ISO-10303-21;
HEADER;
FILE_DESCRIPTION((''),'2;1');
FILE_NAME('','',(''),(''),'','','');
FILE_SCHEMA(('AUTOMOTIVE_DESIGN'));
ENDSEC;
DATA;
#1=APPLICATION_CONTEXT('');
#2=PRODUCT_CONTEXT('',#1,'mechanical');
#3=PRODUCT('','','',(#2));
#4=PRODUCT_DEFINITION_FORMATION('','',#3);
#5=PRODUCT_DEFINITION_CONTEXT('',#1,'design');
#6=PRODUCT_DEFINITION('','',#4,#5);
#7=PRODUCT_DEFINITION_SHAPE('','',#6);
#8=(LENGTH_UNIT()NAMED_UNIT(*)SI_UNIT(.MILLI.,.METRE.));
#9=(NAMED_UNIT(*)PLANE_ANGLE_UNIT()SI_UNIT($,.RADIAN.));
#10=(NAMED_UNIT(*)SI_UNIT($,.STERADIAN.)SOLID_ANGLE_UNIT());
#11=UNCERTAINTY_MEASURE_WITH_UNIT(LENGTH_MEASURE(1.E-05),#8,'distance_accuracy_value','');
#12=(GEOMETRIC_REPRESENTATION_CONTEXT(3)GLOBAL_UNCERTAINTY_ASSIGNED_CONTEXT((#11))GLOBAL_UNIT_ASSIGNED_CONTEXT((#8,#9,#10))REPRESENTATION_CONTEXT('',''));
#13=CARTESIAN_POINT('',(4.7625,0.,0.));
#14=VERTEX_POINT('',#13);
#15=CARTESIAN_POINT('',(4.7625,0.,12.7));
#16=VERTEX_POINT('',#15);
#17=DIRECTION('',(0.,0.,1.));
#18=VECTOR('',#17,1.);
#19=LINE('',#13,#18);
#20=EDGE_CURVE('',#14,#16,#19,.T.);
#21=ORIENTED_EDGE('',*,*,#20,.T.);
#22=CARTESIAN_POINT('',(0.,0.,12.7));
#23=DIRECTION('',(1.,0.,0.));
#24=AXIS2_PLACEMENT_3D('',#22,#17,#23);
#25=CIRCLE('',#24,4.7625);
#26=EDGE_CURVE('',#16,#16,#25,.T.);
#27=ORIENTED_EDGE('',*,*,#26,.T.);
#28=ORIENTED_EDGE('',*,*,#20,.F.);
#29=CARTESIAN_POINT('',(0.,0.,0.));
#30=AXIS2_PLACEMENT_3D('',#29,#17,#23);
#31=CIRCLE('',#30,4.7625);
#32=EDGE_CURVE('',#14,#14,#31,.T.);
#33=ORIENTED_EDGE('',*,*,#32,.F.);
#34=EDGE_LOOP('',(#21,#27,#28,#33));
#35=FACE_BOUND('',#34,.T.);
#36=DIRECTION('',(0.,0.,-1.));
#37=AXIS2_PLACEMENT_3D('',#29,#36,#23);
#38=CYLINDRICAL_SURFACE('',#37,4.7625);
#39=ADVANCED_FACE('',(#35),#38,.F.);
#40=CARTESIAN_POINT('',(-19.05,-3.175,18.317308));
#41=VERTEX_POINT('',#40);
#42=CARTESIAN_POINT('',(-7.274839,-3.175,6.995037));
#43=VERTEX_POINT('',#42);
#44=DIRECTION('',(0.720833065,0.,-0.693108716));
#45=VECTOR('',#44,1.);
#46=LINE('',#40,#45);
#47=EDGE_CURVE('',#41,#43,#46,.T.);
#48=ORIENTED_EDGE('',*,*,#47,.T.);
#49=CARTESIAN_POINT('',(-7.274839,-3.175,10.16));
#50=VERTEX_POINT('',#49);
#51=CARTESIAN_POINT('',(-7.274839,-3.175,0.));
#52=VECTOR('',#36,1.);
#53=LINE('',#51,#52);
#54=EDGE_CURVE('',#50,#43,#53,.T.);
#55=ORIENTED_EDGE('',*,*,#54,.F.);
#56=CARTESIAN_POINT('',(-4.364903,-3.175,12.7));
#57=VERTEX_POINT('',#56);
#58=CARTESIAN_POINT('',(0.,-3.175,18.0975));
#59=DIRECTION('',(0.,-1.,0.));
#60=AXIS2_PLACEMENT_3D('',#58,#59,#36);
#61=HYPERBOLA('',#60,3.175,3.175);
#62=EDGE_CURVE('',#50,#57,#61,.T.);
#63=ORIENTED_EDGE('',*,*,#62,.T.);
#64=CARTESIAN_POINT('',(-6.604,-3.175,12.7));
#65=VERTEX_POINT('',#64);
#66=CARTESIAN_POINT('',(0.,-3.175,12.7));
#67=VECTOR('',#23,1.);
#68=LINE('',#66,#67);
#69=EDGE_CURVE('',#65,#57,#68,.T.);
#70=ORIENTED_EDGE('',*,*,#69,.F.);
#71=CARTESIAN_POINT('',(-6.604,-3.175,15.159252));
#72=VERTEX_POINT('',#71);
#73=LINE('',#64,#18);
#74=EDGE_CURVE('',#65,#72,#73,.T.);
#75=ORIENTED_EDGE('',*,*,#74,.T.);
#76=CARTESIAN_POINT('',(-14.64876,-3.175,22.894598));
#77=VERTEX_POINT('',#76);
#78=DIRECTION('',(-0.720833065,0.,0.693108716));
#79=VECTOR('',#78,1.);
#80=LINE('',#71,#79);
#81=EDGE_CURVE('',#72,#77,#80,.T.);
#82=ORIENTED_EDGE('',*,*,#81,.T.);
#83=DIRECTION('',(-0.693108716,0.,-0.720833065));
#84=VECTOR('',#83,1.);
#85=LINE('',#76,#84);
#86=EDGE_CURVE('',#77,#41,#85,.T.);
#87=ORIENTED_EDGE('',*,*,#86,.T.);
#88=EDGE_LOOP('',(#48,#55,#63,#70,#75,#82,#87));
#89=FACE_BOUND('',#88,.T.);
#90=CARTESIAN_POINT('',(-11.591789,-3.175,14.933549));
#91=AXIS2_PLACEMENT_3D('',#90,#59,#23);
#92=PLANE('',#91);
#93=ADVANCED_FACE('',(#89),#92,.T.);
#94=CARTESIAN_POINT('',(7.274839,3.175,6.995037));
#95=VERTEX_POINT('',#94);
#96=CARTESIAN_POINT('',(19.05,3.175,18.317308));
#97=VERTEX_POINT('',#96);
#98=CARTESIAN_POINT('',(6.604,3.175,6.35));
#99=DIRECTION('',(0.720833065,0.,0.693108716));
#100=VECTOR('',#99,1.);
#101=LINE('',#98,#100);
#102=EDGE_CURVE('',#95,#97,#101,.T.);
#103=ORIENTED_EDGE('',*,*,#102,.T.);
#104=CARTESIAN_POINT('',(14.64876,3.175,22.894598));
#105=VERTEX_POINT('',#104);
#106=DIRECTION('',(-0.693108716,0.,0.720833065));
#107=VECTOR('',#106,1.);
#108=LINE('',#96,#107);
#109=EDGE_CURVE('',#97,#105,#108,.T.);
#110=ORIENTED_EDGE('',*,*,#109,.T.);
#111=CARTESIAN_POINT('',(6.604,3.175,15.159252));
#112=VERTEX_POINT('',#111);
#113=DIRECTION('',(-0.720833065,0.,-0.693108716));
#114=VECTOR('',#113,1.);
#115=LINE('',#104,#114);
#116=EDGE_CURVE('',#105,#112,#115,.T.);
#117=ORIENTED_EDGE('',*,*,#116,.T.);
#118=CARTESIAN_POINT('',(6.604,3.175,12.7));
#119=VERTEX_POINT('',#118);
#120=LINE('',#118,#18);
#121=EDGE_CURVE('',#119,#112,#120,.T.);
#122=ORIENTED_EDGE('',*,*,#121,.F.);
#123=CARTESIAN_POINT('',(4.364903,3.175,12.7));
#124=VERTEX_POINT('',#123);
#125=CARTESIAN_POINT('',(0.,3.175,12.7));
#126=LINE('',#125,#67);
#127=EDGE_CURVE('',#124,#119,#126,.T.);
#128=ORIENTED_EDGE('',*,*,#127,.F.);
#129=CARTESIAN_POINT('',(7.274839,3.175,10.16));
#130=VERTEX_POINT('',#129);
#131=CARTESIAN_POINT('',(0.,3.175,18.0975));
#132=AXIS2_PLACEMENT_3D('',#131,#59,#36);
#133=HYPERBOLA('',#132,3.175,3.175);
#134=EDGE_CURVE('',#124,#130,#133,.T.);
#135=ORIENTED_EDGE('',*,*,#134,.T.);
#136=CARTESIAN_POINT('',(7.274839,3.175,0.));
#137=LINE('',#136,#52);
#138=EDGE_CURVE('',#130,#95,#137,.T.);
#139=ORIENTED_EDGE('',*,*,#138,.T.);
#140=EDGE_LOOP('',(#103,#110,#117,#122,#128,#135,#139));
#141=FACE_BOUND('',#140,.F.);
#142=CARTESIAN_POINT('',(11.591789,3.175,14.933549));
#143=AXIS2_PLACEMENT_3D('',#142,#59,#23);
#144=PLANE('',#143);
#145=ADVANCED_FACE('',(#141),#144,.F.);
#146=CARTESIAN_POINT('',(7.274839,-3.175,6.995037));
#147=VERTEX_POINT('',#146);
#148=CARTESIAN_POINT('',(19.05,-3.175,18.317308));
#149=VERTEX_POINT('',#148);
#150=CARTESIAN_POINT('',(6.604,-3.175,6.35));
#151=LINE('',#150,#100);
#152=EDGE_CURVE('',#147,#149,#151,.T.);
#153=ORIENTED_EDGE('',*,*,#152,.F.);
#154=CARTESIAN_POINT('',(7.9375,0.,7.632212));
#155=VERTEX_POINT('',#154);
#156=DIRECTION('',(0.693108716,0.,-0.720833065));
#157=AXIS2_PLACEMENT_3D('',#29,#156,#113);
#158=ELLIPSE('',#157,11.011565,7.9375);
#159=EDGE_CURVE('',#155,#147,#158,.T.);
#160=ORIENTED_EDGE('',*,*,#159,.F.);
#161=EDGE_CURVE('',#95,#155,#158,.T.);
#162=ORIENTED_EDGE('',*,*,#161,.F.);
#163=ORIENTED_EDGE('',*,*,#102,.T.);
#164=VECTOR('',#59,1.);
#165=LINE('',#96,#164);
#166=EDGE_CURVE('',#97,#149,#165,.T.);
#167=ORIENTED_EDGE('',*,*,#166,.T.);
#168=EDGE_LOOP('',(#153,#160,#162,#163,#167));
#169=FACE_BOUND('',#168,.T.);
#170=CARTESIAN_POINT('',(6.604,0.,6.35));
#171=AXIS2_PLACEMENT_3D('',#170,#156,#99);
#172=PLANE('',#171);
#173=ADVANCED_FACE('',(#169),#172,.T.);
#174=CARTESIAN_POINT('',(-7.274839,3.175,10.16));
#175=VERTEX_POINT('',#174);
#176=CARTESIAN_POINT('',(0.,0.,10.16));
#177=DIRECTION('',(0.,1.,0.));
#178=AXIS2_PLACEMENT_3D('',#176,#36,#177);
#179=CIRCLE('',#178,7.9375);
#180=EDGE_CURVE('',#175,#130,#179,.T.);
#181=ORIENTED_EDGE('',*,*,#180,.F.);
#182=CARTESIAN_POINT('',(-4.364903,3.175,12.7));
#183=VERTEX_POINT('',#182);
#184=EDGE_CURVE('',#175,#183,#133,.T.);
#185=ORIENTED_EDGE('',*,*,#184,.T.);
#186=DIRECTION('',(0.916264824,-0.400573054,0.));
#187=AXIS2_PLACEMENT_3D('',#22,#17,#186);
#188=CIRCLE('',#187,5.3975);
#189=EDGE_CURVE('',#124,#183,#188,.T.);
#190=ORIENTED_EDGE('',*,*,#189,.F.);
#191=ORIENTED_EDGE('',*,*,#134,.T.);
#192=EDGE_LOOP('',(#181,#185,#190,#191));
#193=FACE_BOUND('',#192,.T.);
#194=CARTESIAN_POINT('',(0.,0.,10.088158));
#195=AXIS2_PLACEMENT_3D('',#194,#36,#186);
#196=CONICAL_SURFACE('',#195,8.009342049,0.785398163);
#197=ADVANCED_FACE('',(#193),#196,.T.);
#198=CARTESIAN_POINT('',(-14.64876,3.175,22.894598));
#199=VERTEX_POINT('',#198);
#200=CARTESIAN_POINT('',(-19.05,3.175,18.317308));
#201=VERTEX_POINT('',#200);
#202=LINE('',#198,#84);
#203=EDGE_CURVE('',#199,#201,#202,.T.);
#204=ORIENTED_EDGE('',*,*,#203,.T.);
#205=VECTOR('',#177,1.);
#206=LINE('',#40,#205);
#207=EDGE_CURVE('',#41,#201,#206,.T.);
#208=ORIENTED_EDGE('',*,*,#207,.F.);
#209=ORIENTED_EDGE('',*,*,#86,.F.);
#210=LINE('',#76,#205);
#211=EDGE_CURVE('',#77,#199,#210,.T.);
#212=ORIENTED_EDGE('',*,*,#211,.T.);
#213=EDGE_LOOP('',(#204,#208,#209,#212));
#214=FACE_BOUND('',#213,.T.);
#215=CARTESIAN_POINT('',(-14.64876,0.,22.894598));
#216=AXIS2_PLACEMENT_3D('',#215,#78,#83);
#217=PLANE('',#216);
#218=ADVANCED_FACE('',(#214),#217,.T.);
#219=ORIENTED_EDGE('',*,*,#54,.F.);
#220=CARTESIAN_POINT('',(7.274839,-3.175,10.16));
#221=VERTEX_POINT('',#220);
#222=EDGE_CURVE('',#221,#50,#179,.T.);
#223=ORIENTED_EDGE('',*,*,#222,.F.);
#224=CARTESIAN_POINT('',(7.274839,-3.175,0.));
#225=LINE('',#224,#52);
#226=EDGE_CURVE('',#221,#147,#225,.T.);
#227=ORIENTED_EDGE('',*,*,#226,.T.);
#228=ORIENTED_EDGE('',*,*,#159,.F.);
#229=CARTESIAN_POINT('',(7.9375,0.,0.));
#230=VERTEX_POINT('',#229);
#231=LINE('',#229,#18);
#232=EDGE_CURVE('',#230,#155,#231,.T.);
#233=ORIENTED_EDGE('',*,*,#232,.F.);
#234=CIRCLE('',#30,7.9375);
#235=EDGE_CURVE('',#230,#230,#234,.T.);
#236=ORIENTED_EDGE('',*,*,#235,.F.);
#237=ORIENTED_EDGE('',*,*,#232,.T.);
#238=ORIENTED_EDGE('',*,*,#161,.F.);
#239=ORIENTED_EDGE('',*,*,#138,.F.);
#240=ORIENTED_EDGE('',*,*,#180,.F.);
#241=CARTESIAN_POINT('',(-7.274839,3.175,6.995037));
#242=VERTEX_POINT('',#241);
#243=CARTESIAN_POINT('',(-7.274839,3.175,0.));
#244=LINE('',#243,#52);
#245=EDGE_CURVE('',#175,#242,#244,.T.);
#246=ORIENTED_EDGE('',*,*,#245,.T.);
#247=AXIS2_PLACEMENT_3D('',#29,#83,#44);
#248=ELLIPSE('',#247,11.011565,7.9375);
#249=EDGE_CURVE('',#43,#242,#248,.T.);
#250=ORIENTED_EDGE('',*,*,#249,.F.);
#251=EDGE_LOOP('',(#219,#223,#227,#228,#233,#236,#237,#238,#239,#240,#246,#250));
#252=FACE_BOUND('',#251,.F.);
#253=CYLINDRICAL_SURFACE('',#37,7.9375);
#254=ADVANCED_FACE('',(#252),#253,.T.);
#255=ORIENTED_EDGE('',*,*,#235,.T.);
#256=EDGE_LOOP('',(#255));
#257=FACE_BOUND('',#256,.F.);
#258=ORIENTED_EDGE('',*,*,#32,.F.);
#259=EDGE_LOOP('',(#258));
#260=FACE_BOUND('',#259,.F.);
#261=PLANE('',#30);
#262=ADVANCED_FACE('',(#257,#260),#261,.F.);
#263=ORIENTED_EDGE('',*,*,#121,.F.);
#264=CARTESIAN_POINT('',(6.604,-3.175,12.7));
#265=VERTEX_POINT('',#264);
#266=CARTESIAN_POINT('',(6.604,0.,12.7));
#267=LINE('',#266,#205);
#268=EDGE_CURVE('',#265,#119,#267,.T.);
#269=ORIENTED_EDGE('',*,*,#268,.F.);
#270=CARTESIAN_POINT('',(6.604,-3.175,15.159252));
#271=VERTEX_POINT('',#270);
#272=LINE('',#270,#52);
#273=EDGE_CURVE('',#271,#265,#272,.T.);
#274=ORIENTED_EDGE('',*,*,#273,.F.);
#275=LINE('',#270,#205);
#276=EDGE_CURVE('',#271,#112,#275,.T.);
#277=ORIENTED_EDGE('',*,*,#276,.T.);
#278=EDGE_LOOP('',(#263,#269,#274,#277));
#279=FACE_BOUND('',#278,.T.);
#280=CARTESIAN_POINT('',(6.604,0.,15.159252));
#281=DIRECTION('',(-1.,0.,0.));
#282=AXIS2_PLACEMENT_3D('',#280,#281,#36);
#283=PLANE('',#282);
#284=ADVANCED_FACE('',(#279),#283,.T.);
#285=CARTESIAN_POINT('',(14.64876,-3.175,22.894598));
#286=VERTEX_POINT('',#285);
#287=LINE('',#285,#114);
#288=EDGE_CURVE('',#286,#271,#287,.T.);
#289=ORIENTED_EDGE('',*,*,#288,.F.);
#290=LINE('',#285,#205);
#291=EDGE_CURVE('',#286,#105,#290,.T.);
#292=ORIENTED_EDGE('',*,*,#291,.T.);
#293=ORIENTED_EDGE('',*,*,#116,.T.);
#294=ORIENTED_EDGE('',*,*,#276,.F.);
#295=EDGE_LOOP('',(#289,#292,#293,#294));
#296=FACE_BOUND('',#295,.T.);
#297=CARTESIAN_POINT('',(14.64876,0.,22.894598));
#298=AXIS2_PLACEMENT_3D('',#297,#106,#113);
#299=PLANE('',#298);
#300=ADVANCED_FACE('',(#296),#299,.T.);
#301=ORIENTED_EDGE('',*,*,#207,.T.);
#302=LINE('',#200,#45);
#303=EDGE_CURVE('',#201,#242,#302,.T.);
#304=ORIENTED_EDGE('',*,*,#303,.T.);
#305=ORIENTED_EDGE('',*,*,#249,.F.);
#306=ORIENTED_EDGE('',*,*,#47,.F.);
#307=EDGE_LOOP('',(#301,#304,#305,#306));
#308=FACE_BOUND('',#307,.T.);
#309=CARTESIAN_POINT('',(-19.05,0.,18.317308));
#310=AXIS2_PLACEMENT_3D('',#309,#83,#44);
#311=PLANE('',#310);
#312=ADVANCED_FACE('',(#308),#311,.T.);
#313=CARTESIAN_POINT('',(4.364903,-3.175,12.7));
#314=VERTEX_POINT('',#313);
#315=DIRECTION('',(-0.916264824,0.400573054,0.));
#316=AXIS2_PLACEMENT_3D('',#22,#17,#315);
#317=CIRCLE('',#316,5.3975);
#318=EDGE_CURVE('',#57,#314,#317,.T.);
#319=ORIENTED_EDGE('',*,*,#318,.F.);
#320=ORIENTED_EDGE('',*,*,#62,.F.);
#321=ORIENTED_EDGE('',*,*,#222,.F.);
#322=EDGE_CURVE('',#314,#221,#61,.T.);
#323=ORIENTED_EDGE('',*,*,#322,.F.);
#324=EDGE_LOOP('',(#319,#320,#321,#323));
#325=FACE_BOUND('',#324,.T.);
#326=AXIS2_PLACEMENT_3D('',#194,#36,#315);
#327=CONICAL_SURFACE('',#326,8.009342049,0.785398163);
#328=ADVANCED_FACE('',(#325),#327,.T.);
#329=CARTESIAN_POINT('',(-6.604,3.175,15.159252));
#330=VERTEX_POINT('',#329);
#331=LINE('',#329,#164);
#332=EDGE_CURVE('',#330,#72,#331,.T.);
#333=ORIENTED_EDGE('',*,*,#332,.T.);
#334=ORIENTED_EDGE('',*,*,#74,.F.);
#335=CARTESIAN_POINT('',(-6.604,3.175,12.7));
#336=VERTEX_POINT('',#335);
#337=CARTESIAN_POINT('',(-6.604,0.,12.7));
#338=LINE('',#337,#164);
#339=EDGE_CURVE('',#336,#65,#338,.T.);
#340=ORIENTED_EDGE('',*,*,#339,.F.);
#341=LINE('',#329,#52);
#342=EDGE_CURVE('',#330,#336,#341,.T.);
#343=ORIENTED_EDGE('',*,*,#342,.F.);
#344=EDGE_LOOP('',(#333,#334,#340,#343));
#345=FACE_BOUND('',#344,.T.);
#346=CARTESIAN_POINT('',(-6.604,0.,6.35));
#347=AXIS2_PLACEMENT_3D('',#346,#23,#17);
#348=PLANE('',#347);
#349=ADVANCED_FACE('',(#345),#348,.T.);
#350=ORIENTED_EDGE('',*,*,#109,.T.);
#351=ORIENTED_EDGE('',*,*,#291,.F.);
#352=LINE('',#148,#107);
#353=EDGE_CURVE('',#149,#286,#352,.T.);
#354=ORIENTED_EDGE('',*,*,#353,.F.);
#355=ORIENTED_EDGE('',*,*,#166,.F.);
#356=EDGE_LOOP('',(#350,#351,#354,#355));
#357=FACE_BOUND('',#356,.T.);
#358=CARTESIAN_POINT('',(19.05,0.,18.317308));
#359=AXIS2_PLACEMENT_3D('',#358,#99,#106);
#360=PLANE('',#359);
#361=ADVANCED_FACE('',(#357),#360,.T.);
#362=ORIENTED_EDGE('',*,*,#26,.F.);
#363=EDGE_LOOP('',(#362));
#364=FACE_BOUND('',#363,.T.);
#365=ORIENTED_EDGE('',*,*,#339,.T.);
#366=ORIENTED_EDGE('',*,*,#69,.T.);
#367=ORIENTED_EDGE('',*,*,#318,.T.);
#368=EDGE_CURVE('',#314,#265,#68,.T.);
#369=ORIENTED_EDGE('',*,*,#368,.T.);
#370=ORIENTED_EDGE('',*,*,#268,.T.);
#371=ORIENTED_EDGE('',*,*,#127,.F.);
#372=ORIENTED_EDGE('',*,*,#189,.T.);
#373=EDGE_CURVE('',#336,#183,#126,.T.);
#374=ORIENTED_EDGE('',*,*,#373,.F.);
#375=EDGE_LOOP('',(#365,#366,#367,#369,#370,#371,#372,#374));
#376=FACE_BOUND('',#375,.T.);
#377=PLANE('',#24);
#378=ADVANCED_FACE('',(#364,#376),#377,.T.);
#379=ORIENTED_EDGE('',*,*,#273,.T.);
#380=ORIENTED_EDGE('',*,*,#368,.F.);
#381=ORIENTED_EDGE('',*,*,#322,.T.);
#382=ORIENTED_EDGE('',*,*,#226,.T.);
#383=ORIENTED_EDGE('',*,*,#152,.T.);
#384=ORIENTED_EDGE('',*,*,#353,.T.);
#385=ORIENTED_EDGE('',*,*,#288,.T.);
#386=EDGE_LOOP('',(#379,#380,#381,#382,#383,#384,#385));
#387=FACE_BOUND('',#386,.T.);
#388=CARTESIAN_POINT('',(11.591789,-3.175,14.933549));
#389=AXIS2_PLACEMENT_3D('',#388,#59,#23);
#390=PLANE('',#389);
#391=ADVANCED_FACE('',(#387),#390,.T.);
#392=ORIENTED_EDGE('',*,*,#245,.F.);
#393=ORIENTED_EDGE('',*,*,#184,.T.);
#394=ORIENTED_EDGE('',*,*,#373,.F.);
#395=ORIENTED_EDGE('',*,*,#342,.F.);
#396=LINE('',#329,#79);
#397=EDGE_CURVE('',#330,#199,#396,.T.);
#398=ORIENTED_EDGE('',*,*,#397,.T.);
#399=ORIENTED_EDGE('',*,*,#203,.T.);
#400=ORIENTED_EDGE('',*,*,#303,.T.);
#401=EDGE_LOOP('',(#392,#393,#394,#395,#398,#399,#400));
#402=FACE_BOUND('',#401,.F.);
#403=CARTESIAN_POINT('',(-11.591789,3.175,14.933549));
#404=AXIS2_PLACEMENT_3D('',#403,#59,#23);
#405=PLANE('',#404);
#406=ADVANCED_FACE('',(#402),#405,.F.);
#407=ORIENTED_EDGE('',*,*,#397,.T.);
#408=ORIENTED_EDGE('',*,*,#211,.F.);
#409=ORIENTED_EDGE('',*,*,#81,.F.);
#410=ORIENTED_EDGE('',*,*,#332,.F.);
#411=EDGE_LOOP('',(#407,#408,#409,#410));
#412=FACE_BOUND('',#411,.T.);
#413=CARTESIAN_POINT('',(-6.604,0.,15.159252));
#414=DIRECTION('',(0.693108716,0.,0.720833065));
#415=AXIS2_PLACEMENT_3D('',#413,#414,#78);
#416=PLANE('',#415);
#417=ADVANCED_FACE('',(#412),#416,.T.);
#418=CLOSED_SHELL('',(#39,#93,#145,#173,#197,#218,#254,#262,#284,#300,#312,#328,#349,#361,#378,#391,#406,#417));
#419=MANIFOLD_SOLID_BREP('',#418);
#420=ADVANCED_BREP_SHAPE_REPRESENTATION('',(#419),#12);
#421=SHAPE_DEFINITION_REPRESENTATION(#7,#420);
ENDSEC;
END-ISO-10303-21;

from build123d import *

# Parameters (mm, degrees)
F1_DEPTH      = 3.175
F1_DEPTH_BACK = 3.175
F2_R          = 7.9375
F2_R_2        = 4.7625
F3_DEPTH      = 12.7
F4_T4_ANGLE   = 227.2280154593
F4_T9_ANGLE   = 227.2280154593


# Not quite as in the source:
# - a fillet or chamfer that OpenCascade refuses, or shapes differently, is made with other operations: its cross-section is extruded or revolved along the edge and cut away or added


with BuildPart() as f1:
    # F0 (on Front) → F1 (new body, two sides)
    with BuildSketch(Plane.XZ) as f1_sk:
        Polygon((-19.05, 18.3173076923), (-6.604, 6.35), (-6.604, 15.1592518354), (-14.6487596518, 22.8945976544), align=None)
    extrude(amount=F1_DEPTH)
    extrude(f1_sk.sketch, amount=-F1_DEPTH_BACK)



with BuildPart() as f1b:
    # F0 (on Front) → F1, piece 2 (new body, two sides)
    with BuildSketch(Plane.XZ) as f1_2_sk:
        Polygon((6.604, 15.1592518354), (6.604, 6.35), (19.05, 18.3173076923), (14.6487596518, 22.8945976544), align=None)
    extrude(amount=F1_DEPTH)
    extrude(f1_2_sk.sketch, amount=-F1_DEPTH_BACK)


with BuildPart() as f1_1:
    add(f1.part)

    add(f1b.part)  # F3 merges F1b
    # F2 (on Top) → F3 (join)
    with BuildSketch(Plane.XY):
        Circle(F2_R)
        Circle(F2_R_2, mode=Mode.SUBTRACT)
    extrude(amount=F3_DEPTH)

    # F4: chamfer of 2.54 on 2 edges, made by hand


with BuildPart() as f4_tool2:
    # F4_s3 → F4_t4 (revolve)
    with BuildSketch(Plane(origin=(0, 0, 0), x_dir=(0, 0, 1), z_dir=(0.4005730539, 0.9162648244, 0))):
        with BuildLine():
            Line((10.088157951, -8.009342049), (12.771842049, -5.325657951))
            Line((12.771842049, -5.325657951), (12.822642049, -5.325657951))
            ThreePointArc((12.822642049, -5.325657951), (12.7508, -6.6315789755), (12.7508, -7.9375))
            Line((12.7508, -7.9375), (12.7, -7.9883))
            ThreePointArc((12.7, -7.9883), (11.3940789755, -7.9883), (10.088157951, -8.060142049))
            Line((10.088157951, -8.060142049), (10.088157951, -8.009342049))
        make_face()
    revolve(axis=Axis((0, 0, 12.7), (0, 0, 1)), revolution_arc=F4_T4_ANGLE)

    split(bisect_by=Plane.XZ.offset(3.175), keep=Keep.TOP)


with BuildPart() as f1_2:
    add(f1_1.part)

    # F4_t1: cut F4_tool2
    add(f4_tool2.part, mode=Mode.SUBTRACT)


with BuildPart() as f4_tool7:
    # F4_s8 → F4_t9 (revolve)
    with BuildSketch(Plane(origin=(0, 0, 0), x_dir=(0, 0, 1), z_dir=(-0.4005730539, -0.9162648244, 0))):
        with BuildLine():
            Line((10.088157951, -8.009342049), (12.771842049, -5.325657951))
            Line((12.771842049, -5.325657951), (12.822642049, -5.325657951))
            ThreePointArc((12.822642049, -5.325657951), (12.7508, -6.6315789755), (12.7508, -7.9375))
            Line((12.7508, -7.9375), (12.7, -7.9883))
            ThreePointArc((12.7, -7.9883), (11.3940789755, -7.9883), (10.088157951, -8.060142049))
            Line((10.088157951, -8.060142049), (10.088157951, -8.009342049))
        make_face()
    revolve(axis=Axis((0, 0, 12.7), (0, 0, 1)), revolution_arc=F4_T9_ANGLE)

    split(bisect_by=Plane.XZ.offset(-3.175), keep=Keep.BOTTOM)


with BuildPart() as f1_3:
    add(f1_2.part)

    # F4_t6: cut F4_tool7
    add(f4_tool7.part, mode=Mode.SUBTRACT)


solid = f1_3.part
